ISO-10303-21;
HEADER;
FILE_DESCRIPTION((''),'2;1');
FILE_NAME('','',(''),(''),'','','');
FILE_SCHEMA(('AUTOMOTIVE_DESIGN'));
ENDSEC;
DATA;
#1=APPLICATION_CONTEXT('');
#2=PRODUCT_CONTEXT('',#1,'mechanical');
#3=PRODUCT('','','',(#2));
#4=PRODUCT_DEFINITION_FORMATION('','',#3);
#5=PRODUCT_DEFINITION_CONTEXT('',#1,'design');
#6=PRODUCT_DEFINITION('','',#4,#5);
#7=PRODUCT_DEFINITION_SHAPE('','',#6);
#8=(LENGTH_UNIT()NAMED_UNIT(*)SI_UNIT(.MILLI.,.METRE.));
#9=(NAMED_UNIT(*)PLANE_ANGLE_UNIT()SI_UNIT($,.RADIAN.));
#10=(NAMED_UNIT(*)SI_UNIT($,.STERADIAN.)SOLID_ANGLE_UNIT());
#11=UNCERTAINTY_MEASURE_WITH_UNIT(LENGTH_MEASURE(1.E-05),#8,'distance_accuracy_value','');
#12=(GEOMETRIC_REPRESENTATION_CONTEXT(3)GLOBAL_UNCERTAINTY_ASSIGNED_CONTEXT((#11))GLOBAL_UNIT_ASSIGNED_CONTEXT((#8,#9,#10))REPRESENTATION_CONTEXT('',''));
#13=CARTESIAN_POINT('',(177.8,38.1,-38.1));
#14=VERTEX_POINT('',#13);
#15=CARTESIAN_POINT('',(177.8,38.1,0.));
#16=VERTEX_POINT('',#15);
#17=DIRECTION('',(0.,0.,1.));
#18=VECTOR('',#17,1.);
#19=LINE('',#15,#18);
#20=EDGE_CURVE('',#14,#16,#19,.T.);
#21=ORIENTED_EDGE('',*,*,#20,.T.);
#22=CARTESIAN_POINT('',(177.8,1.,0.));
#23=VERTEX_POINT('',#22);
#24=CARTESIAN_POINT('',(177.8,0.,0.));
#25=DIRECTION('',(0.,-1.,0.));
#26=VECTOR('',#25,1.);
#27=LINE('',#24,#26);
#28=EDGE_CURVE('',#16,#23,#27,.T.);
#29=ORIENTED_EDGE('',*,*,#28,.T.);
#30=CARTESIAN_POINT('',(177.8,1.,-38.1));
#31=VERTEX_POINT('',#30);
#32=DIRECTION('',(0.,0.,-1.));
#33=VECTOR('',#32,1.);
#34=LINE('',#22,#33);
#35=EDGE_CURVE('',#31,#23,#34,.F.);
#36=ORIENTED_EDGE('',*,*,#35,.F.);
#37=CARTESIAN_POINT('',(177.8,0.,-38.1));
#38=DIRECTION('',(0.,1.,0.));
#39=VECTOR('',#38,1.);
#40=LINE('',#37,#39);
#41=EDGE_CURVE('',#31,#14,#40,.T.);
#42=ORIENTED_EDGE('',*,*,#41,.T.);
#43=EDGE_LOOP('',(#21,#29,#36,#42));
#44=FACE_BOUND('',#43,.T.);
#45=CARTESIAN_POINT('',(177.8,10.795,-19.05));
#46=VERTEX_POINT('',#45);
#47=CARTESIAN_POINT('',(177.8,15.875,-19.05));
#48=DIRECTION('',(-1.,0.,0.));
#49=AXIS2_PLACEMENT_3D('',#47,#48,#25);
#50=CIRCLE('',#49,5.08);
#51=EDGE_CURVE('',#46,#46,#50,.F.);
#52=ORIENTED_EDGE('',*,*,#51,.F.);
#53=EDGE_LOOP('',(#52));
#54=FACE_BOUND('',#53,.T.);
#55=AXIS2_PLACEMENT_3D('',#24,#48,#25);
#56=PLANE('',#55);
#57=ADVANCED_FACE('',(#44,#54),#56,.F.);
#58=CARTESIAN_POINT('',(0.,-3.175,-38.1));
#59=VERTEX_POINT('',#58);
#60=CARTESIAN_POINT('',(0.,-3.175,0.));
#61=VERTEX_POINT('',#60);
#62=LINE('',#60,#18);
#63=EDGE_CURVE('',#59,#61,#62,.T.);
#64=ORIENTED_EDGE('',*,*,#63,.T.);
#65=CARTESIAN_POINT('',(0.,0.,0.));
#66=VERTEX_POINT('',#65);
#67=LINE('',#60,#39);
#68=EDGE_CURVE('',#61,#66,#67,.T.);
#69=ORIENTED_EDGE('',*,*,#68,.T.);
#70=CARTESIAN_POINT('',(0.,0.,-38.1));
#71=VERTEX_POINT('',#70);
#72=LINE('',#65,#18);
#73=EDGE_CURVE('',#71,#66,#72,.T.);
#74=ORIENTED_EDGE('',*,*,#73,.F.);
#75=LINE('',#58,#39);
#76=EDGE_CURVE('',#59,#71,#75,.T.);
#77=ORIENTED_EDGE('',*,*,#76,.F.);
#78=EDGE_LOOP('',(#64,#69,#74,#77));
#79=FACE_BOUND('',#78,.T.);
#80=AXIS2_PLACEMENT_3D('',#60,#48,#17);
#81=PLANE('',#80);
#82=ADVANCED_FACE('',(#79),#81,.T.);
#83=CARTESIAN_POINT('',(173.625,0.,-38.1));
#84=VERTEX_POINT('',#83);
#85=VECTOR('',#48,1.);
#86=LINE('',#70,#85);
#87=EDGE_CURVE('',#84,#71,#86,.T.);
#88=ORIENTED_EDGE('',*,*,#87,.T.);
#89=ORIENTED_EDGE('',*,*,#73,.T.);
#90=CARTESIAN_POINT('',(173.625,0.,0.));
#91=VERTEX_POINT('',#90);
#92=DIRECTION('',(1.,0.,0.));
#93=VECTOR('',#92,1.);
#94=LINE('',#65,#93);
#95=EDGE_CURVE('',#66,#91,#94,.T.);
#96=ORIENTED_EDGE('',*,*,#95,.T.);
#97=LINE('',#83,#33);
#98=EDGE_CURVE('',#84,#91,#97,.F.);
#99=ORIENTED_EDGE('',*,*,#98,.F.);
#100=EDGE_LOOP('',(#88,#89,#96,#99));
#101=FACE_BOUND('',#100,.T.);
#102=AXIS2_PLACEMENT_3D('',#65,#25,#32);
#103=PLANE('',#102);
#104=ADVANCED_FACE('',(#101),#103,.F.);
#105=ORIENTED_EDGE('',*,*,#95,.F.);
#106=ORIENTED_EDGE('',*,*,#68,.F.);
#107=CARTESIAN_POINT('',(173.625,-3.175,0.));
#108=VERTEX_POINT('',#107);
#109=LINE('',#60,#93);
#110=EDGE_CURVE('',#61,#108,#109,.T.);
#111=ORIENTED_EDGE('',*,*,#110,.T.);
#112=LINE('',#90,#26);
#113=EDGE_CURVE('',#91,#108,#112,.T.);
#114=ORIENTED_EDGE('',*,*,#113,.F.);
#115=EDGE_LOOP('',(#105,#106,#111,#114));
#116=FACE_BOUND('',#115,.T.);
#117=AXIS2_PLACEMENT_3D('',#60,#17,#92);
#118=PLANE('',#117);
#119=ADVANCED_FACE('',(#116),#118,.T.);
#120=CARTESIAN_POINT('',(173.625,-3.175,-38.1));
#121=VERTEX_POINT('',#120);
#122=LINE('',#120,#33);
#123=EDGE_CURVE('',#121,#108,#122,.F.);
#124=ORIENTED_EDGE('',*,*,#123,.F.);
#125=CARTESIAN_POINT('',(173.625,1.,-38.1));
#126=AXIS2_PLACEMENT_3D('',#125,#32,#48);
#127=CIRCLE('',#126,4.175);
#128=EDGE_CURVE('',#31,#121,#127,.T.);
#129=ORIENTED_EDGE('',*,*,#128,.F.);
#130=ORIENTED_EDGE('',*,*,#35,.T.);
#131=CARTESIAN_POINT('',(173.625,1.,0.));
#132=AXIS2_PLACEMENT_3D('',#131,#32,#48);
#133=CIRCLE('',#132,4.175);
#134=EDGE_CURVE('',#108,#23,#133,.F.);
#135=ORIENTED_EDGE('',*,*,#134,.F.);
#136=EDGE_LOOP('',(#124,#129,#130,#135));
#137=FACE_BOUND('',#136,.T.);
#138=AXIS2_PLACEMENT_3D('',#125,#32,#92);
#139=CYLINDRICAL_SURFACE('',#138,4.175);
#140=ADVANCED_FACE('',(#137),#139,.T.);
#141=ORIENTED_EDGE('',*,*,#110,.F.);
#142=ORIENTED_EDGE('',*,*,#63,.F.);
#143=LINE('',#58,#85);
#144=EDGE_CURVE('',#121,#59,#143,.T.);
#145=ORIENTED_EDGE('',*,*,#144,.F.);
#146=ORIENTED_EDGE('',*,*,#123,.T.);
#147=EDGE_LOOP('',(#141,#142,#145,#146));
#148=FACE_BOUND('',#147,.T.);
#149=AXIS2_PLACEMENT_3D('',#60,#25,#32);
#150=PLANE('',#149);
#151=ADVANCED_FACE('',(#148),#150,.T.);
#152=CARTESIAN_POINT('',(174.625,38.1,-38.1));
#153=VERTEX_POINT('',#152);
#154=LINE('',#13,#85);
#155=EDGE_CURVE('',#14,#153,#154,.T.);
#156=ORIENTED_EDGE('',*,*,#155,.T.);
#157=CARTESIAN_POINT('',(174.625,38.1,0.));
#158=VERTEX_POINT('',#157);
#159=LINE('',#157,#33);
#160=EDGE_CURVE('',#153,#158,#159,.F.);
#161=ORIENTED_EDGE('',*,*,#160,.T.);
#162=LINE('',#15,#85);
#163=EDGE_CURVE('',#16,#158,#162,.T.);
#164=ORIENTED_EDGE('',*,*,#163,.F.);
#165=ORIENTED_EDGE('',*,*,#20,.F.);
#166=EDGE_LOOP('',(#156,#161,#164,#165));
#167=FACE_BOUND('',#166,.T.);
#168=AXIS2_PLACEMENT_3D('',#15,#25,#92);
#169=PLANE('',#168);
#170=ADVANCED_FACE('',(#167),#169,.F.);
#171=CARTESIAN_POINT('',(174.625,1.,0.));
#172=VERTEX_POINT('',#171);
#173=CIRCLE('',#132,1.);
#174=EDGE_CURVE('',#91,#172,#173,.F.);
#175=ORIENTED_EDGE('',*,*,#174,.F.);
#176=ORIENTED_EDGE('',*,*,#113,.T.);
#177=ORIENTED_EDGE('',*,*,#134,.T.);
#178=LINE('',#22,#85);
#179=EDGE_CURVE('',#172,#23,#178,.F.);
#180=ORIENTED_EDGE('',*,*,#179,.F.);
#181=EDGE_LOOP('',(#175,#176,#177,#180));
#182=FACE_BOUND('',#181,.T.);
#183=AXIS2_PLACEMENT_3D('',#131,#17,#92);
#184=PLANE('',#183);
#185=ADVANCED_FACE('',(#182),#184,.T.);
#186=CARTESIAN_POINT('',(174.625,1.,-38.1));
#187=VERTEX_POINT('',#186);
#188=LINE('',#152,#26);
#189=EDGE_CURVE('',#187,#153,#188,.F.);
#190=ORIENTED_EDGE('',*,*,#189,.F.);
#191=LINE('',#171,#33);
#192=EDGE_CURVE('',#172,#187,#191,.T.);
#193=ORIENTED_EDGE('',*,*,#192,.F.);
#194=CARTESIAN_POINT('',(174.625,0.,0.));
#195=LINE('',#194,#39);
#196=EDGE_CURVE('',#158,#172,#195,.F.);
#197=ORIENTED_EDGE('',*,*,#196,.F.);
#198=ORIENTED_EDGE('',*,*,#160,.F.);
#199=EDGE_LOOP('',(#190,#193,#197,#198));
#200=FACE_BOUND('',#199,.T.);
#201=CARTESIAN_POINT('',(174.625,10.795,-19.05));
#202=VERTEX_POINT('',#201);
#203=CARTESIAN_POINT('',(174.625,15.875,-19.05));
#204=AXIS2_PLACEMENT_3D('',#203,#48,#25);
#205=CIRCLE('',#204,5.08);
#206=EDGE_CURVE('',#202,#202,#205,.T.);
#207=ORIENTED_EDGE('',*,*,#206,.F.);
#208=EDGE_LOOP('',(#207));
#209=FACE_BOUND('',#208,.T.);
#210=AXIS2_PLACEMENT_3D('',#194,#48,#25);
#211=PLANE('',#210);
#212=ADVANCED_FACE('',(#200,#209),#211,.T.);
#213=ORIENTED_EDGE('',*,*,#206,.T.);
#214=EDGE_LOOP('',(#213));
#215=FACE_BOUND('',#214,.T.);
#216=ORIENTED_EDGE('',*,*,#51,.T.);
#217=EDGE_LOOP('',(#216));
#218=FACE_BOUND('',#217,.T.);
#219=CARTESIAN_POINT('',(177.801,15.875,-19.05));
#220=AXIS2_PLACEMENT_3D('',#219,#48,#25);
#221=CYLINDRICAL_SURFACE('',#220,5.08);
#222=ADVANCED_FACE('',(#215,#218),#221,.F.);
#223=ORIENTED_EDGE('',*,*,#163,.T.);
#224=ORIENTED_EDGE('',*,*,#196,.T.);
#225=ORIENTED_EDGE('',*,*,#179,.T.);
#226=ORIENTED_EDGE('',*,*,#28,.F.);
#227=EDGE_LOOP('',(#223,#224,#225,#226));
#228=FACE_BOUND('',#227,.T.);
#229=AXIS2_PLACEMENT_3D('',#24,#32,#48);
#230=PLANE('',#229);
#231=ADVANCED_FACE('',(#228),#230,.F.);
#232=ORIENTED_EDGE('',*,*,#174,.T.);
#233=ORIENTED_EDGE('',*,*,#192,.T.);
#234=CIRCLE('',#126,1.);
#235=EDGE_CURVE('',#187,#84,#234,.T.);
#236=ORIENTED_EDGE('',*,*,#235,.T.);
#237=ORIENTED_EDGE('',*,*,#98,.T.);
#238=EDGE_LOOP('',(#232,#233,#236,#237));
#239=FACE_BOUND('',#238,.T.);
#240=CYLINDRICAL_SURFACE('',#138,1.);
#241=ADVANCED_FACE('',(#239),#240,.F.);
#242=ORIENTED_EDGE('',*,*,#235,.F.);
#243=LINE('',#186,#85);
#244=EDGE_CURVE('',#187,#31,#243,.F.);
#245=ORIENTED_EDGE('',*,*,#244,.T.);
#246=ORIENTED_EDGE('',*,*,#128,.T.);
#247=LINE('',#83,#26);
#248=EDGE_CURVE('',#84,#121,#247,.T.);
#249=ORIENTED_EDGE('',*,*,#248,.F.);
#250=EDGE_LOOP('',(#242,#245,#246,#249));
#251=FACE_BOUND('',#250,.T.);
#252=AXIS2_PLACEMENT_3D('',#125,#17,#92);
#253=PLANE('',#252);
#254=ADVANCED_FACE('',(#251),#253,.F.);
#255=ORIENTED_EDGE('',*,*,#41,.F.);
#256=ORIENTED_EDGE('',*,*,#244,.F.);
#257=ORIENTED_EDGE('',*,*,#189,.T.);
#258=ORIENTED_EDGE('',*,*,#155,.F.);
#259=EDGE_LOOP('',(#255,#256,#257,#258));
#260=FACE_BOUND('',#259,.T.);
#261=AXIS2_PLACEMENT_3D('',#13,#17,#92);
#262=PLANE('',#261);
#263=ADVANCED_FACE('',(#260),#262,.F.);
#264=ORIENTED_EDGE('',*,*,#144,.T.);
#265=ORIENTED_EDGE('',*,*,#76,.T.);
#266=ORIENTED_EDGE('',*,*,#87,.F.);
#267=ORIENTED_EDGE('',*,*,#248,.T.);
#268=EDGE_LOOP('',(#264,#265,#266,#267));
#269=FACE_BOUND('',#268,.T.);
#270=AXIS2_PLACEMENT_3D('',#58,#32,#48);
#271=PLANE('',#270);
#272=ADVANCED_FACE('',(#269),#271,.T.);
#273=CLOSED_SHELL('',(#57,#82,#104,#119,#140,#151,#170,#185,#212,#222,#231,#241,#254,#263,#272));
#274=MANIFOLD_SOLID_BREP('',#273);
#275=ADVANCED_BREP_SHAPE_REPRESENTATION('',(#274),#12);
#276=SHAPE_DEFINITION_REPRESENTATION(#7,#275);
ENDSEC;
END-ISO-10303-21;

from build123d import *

# Parameters (mm, degrees)
SKETCH2_W                    = 177.8
SKETCH2_H                    = 38.1
BASE_FLANGE1_DEPTH           = 3.175
EDGE_FLANGE1_STRIP_W         = 14.7
EDGE_FLANGE1_STRIP_H         = 3.175
EDGE_FLANGE1_STRIP_CUT_DEPTH = 38.1
EDGE_FLANGE1_DEPTH           = 38.1
CUT_EXTRUDE1_REACH           = 184.749
SKETCH10_R                   = 5.08


# Sheet-metal steps are written as plain solids
with BuildPart() as part:
    # Sketch2 → Base-Flange1 (new body)
    with BuildSketch(Plane(origin=(0, 0, 0), x_dir=(1, 0, 0), z_dir=(0, 1, 0))):
        with Locations((88.9, 19.05)):
            Rectangle(SKETCH2_W, SKETCH2_H)
    extrude(amount=-BASE_FLANGE1_DEPTH)

    # Edge-Flange1 strip (across the edge) → Edge-Flange1 strip cut (cut)
    with BuildSketch(Plane(origin=(177.8, 0, 0), x_dir=(-1, 0, 0), z_dir=(0, 0, -1))):
        with Locations((-3.175, -1.5875)):
            Rectangle(EDGE_FLANGE1_STRIP_W, EDGE_FLANGE1_STRIP_H)
    extrude(amount=EDGE_FLANGE1_STRIP_CUT_DEPTH, mode=Mode.SUBTRACT)

    # Edge-Flange1 section (across the edge) → Edge-Flange1 (add)
    with BuildSketch(Plane(origin=(177.8, 0, 0), x_dir=(-1, 0, 0), z_dir=(0, 0, -1))):
        with BuildLine():
            Line((0, 1), (0, 38.1))
            Line((0, 38.1), (3.175, 38.1))
            Line((3.175, 38.1), (3.175, 1))
            ThreePointArc((3.175, 1), (3.467893219, 0.292893219), (4.175, 0))
            Line((4.175, 0), (4.175, -3.175))
            ThreePointArc((4.175, -3.175), (1.222829189, -1.952170811), (0, 1))
        make_face()
    extrude(amount=EDGE_FLANGE1_DEPTH)

    # Sketch10 → Cut-Extrude1 (cut, up to next)
    with BuildSketch(Plane.ZY.offset(-174.625), mode=Mode.PRIVATE) as cut_extrude1_sk1:
        with Locations(Location((-19.05, 15.875, 0), (0, 0, 270))):
            Circle(SKETCH10_R)
    cut_extrude1_tool1 = extrude(cut_extrude1_sk1.sketch, amount=-CUT_EXTRUDE1_REACH, mode=Mode.PRIVATE) & part.part
    add(cut_extrude1_tool1.solids().sort_by_distance((174.625, 15.875, -19.05))[0], mode=Mode.SUBTRACT)


solid = part.part
